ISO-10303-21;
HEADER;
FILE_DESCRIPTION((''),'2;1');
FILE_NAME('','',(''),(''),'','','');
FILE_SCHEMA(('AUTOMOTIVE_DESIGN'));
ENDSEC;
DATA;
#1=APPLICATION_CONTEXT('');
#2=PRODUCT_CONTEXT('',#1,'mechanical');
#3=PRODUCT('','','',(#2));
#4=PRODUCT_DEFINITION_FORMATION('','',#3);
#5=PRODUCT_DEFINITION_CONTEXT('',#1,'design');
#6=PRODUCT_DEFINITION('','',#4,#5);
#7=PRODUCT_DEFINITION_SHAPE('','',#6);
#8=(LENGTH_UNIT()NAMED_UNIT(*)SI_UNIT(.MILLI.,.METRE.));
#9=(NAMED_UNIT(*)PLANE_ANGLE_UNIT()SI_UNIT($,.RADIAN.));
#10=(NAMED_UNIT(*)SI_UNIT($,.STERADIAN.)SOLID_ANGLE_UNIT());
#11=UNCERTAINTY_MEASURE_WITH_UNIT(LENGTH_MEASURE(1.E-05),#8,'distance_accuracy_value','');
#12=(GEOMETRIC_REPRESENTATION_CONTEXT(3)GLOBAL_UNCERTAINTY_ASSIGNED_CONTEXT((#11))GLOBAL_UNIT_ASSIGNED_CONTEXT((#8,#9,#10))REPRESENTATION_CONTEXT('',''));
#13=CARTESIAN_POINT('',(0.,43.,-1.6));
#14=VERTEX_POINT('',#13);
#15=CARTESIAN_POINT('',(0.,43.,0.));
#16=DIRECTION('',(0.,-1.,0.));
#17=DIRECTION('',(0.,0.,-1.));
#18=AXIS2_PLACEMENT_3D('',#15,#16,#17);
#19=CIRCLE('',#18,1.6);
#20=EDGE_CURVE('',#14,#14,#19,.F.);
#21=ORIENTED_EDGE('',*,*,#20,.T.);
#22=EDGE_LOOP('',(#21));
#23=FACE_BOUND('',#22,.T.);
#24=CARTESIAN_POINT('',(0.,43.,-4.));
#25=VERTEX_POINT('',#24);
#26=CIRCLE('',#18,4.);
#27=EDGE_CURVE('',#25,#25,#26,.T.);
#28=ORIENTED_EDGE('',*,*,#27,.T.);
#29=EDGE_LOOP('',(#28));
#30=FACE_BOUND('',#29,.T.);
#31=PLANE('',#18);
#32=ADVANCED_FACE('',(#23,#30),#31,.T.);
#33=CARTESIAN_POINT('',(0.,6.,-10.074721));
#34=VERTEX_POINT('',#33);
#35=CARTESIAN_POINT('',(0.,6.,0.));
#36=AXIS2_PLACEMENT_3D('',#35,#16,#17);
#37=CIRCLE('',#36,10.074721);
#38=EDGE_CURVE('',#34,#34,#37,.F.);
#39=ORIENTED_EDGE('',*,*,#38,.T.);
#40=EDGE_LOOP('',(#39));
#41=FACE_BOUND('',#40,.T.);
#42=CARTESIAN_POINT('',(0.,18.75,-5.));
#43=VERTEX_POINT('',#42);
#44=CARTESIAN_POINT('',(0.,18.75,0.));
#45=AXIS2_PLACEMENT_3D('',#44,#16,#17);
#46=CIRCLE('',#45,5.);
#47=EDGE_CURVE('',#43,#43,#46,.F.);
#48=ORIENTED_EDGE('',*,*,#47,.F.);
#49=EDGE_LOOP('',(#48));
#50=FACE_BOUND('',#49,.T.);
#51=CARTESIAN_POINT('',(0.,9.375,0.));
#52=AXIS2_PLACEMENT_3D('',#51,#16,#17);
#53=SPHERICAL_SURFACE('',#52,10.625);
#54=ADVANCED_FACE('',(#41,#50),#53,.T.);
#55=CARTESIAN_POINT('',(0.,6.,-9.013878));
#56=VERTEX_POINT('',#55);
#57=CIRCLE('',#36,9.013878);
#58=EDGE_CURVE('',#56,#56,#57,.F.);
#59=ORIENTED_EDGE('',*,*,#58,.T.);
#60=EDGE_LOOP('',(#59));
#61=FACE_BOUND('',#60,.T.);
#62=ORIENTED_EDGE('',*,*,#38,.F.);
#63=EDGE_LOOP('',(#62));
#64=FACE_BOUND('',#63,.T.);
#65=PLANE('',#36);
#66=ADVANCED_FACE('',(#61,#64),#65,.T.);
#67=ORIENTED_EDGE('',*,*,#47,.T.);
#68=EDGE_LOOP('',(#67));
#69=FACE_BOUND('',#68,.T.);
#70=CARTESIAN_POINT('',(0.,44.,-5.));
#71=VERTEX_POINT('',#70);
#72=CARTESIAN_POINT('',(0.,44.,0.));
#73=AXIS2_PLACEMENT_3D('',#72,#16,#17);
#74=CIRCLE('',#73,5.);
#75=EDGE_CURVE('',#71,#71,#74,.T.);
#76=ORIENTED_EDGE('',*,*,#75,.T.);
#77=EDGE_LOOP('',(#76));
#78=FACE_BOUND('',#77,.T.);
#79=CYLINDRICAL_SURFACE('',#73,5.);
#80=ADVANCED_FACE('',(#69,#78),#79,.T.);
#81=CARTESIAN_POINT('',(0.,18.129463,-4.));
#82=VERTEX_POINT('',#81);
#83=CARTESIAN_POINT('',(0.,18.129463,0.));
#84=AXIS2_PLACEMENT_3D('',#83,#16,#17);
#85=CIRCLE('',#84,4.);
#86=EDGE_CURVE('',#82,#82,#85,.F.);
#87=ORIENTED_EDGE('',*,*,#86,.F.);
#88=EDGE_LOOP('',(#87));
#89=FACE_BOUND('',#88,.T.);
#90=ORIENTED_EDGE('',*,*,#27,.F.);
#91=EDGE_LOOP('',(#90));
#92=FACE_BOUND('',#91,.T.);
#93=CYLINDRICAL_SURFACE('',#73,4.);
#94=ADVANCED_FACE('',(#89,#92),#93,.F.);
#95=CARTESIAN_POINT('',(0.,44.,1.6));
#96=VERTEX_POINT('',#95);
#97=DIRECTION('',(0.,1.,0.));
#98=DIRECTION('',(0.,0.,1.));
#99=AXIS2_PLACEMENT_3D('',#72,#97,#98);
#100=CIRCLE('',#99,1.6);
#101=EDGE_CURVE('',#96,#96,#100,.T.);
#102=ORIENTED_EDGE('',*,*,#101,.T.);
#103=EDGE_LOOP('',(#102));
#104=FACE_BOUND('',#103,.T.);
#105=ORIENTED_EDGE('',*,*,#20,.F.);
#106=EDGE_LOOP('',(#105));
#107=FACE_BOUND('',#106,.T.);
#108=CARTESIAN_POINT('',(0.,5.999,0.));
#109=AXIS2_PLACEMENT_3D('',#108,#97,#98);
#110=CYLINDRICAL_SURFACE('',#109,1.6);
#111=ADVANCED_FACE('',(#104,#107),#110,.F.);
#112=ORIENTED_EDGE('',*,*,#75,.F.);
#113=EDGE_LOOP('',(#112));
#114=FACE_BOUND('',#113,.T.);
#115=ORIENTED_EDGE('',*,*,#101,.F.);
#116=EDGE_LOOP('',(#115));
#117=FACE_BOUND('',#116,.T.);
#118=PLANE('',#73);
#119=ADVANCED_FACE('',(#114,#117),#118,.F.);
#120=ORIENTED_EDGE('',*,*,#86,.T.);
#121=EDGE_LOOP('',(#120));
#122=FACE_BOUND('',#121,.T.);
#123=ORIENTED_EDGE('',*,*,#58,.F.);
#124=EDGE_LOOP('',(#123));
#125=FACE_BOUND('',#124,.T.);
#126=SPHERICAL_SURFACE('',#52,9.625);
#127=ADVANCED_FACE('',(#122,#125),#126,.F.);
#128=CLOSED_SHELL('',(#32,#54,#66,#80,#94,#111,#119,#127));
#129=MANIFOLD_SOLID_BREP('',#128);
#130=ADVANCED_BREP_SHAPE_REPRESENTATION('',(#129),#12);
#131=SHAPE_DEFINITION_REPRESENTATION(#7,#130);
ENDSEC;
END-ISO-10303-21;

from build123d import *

# Parameters (mm, degrees)
ESBO_O1_R                = 5
RESSALTO_EXTRUS_O1_DEPTH = 30
RESSALTO_EXTRUS_O4_START = -74
ESBO_O4_R                = 5
RESSALTO_EXTRUS_O4_DEPTH = 74
ESBO_O3_R                = 71.162261847
CORTE_EXTRUS_O2_DEPTH    = 36
CORTE_EXTRUS_O3_REACH    = 42.863
ESBO_O6_R                = 1.6


# Read off the part's stored shape, not the designer's step: Domo1, Casca3
with BuildPart() as part:
    # Esboço1 → Ressalto-extrusão1 (new body)
    with BuildSketch(Plane(origin=(0, 0, 0), x_dir=(1, 0, 0), z_dir=(0, 1, 0))):
        with Locations(Location((0, 0, 0), (0, 0, 270))):
            Circle(ESBO_O1_R)
    extrude(amount=-RESSALTO_EXTRUS_O1_DEPTH)

    # Domo1 outline → Domo1 (revolve)
    with BuildSketch(Plane.XY):
        with BuildLine():
            Line((0, 0), (4.999999996, -3e-09))
            ThreePointArc((4.999999996, -3e-09), (10.307764064, 11.951941013), (0, 20))
            Line((0, 20), (0, 0))
        make_face()
    revolve(axis=Axis((0, 0, 0), (0, 1, 0)))

    # Esboço4 → Ressalto-extrusão4 (add)
    with BuildSketch(Plane.XZ.offset(30).offset(RESSALTO_EXTRUS_O4_START)):
        with Locations(Location((0, 0, 0), (0, 0, 90))):
            Circle(ESBO_O4_R)
    extrude(amount=RESSALTO_EXTRUS_O4_DEPTH)

    # Esboço3 → Corte-extrusão2 (cut)
    with BuildSketch(Plane.XZ.offset(30)):
        Circle(ESBO_O3_R)
    extrude(amount=-CORTE_EXTRUS_O2_DEPTH, mode=Mode.SUBTRACT)

    # Casca3 outline → Casca3 (revolve, cut)
    with BuildSketch(Plane.XY):
        with BuildLine():
            Line((3.999999997, 18.129463148), (4, 43))
            Line((4, 43), (0, 43))
            Line((0, 43), (0, 5.999999991))
            Line((0, 5.999999991), (9.013878185, 5.999999991))
            ThreePointArc((9.013878185, 5.999999991), (8.895011268, 13.051873609), (3.999999997, 18.129463148))
        make_face()
    revolve(axis=Axis((0, 0, 0), (0, 1, 0)), mode=Mode.SUBTRACT)

    # Esboço6 → Corte-extrusão3 (cut, up to next)
    with BuildSketch(Plane(origin=(0, 44, 0), x_dir=(1, 0, 0), z_dir=(0, 1, 0)), mode=Mode.PRIVATE) as corte_extrus_o3_sk1:
        with Locations(Location((0, 0, 0), (0, 0, 270))):
            Circle(ESBO_O6_R)
    corte_extrus_o3_tool1 = extrude(corte_extrus_o3_sk1.sketch, amount=-CORTE_EXTRUS_O3_REACH, mode=Mode.PRIVATE) & part.part
    add(corte_extrus_o3_tool1.solids().sort_by_distance((0, 44, 0))[0], mode=Mode.SUBTRACT)


solid = part.part
